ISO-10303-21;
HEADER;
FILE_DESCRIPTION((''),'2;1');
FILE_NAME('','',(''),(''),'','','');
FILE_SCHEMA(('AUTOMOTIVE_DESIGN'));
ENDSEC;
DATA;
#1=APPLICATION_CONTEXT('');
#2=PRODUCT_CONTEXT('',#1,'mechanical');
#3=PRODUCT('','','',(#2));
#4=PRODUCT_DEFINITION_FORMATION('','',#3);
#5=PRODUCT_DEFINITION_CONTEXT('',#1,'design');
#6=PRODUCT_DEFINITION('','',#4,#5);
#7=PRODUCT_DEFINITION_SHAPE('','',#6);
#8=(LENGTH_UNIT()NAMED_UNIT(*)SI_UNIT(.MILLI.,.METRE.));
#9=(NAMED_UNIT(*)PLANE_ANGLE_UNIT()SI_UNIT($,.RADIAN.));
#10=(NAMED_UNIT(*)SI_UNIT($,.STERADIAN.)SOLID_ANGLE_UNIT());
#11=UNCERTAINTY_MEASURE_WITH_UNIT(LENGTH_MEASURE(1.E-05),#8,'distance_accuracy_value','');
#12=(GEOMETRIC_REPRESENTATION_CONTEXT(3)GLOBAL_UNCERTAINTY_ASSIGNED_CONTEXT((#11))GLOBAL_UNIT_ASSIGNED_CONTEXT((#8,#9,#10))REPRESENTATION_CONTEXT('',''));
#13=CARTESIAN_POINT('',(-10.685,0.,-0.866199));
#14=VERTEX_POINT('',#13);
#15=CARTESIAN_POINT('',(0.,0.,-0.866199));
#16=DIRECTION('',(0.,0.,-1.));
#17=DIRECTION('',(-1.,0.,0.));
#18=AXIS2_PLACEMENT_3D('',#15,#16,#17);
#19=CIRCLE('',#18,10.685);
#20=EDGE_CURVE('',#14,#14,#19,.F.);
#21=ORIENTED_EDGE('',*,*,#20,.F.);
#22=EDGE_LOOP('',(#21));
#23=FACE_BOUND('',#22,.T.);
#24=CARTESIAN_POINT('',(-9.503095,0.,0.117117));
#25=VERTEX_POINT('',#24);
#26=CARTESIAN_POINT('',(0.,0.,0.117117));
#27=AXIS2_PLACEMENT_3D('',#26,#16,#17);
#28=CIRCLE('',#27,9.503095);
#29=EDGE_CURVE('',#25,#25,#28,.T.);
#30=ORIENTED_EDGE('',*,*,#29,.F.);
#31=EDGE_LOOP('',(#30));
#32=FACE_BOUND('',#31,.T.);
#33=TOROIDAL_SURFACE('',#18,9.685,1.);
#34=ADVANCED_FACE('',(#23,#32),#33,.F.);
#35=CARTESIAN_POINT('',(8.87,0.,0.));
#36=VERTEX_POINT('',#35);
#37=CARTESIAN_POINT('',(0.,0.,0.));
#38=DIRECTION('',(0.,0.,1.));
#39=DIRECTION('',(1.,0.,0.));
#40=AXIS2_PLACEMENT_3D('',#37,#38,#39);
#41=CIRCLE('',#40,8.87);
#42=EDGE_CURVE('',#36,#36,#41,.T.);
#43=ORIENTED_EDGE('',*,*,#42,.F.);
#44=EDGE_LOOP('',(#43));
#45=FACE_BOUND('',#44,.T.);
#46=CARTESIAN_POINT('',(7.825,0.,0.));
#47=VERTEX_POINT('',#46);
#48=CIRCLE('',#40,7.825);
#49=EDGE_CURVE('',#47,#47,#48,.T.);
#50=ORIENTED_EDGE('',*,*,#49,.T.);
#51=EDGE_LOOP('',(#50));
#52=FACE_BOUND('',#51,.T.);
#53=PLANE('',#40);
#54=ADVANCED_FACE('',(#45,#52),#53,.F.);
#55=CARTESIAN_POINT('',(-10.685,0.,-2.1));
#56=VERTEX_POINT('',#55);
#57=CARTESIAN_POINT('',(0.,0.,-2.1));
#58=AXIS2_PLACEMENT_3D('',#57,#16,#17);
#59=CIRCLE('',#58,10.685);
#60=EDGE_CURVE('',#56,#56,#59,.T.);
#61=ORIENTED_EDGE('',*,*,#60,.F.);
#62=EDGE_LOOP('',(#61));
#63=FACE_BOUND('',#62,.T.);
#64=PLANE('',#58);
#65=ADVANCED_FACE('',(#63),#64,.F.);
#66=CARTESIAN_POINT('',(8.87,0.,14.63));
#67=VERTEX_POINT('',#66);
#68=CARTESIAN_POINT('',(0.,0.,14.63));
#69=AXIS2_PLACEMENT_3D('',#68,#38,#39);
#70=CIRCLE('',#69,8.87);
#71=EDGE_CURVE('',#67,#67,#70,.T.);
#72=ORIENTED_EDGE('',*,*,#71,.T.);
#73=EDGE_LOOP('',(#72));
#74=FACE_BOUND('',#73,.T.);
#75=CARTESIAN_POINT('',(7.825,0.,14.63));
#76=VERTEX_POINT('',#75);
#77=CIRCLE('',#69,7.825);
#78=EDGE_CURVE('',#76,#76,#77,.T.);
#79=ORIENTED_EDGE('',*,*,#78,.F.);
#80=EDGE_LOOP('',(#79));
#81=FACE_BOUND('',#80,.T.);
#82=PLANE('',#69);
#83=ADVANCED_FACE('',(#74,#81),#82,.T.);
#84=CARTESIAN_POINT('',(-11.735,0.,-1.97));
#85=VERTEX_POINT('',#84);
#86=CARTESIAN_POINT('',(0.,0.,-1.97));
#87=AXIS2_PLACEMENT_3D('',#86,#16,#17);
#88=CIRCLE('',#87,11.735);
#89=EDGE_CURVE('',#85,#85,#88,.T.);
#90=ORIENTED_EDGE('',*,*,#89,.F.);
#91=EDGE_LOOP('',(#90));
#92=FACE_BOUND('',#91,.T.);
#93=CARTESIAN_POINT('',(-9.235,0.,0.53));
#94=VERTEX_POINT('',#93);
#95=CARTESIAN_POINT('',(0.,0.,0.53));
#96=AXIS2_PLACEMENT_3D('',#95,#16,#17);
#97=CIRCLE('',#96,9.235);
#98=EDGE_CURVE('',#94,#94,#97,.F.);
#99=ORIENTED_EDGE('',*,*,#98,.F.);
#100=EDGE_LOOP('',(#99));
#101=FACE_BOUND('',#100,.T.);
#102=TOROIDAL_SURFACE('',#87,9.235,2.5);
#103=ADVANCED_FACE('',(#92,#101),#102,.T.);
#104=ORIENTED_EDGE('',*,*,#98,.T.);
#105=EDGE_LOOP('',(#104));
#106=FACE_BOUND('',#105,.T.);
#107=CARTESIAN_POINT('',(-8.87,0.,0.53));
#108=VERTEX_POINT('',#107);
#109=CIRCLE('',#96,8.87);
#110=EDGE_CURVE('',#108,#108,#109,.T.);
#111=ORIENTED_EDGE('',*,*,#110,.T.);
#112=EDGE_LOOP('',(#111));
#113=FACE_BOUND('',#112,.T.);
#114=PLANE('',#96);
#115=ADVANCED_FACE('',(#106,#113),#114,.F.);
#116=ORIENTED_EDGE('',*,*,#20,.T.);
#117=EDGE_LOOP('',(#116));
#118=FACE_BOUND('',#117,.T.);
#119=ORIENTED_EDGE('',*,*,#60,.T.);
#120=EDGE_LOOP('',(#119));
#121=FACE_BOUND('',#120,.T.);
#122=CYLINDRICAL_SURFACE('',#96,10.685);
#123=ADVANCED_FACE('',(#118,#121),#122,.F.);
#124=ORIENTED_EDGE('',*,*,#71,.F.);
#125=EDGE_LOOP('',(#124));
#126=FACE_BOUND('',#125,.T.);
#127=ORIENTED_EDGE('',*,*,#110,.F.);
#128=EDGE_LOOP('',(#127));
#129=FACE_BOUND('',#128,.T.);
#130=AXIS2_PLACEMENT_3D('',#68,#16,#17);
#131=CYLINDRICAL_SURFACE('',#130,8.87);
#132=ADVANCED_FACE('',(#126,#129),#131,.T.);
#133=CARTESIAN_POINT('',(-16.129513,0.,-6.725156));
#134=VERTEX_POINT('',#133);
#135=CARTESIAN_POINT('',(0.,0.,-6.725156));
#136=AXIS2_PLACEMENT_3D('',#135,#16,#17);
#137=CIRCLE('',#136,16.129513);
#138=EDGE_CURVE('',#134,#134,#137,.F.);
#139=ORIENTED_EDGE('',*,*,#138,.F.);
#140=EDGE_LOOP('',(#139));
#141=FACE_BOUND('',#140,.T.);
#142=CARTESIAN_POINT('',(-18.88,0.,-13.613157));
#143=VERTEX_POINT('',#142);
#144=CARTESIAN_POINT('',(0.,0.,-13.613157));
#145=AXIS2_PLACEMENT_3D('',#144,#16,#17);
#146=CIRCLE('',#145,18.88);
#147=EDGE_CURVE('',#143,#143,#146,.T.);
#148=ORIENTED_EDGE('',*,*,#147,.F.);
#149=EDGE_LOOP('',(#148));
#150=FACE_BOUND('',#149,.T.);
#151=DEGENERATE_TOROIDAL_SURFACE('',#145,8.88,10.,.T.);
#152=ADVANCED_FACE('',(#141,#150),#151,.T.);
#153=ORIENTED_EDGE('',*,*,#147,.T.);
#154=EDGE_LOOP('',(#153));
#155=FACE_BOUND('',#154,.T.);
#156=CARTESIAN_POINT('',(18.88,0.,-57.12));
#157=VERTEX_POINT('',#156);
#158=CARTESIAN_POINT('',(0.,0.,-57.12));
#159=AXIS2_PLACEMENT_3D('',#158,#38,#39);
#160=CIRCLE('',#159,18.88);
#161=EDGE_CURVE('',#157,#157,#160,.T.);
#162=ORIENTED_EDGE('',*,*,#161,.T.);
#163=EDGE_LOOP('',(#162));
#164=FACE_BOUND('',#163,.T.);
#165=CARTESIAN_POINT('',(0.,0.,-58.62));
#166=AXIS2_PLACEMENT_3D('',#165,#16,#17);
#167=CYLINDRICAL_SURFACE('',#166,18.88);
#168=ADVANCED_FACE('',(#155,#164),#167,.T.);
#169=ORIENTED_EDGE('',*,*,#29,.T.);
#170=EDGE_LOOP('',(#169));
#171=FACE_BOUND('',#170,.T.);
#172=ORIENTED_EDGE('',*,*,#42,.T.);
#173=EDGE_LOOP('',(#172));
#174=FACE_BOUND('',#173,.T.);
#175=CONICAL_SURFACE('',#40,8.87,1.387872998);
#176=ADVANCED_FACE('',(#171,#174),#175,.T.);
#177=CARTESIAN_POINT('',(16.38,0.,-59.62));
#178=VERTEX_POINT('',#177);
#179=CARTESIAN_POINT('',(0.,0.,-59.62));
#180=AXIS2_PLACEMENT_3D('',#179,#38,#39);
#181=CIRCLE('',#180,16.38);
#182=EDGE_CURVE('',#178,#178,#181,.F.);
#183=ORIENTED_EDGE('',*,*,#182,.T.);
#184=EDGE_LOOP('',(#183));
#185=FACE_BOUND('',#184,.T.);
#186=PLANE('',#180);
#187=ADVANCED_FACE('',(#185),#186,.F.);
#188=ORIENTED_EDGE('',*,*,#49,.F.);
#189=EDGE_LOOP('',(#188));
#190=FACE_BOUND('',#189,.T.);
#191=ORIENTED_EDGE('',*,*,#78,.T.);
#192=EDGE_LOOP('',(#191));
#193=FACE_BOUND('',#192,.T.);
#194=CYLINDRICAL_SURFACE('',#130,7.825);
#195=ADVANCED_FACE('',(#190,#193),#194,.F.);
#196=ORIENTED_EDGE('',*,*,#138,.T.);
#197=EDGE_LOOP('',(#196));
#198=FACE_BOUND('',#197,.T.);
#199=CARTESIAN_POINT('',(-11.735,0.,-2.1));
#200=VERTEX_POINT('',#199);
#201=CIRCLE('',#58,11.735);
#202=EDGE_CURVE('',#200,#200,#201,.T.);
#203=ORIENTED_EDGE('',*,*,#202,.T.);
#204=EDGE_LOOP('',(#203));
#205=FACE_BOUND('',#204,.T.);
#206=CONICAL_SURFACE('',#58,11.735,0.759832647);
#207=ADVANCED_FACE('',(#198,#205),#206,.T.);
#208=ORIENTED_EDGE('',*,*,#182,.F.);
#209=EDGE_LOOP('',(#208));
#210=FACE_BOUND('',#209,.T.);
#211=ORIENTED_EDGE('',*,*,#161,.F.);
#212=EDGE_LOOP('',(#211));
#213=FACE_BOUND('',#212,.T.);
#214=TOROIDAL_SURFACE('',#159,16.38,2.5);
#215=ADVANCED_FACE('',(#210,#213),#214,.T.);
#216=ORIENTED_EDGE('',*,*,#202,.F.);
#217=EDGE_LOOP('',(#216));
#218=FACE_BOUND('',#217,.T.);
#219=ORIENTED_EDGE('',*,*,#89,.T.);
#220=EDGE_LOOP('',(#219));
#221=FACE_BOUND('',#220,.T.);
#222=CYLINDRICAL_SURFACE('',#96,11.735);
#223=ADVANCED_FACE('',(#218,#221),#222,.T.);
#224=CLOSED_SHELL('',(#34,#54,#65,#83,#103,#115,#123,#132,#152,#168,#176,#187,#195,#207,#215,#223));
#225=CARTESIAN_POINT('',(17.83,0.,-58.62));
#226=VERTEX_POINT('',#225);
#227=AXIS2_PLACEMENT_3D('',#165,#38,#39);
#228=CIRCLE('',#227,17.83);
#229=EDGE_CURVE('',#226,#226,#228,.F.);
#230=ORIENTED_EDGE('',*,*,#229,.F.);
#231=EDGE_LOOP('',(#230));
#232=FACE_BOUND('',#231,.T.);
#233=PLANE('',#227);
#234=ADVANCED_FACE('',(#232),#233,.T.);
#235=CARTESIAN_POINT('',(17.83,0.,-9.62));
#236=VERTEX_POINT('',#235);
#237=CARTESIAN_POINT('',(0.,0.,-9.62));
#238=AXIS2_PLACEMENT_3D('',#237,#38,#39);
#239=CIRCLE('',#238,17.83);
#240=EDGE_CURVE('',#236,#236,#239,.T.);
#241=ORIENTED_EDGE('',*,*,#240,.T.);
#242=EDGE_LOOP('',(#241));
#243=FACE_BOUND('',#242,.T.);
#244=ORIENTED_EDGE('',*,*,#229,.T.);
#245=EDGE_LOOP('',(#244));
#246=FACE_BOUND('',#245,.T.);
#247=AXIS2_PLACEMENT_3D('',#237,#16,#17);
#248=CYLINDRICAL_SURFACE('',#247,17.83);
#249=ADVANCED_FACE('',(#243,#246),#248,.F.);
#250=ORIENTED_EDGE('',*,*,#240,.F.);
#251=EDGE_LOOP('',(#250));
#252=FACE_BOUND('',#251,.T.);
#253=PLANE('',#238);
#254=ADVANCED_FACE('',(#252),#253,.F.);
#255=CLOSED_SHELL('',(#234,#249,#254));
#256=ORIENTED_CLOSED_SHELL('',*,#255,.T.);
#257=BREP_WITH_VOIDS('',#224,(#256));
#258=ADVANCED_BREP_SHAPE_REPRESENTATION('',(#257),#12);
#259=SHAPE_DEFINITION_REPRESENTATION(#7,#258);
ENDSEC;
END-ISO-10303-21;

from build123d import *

# Parameters (mm, degrees)
SKETCH2_R           = 8.87
SKETCH2_R_2         = 7.825
BOSS_EXTRUDE1_DEPTH = 14.63
SKETCH3_R           = 11.735
SKETCH3_R_2         = 10.685
BOSS_EXTRUDE2_DEPTH = 2.63
FILLET1_R           = 2.5
FILLET2_R           = 1
SKETCH6_R           = 7.825
CUT_EXTRUDE2_DEPTH  = 18.63
SKETCH7_R           = 18.88
BOSS_EXTRUDE3_DEPTH = 1
SKETCH10_R          = 18.88
SKETCH10_R_2        = 17.83
BOSS_EXTRUDE4_DEPTH = 49
FILLET3_R           = 2.5
FILLET6_R           = 10


# Read off the part's stored shape, not the designer's step: Loft5, Loft6
with BuildPart() as part:
    # Sketch2 → Boss-Extrude1 (new body)
    with BuildSketch(Plane.XY):
        Circle(SKETCH2_R)
        Circle(SKETCH2_R_2, mode=Mode.SUBTRACT)
    extrude(amount=BOSS_EXTRUDE1_DEPTH)


with BuildPart() as body_2:
    # Sketch3 → Boss-Extrude2 (new body)
    with BuildSketch(Plane(origin=(0, 0, -2.1), x_dir=(-1, 0, 0), z_dir=(0, 0, -1))):
        Circle(SKETCH3_R)
        Circle(SKETCH3_R_2, mode=Mode.SUBTRACT)
    extrude(amount=-BOSS_EXTRUDE2_DEPTH)


    add(part.part)  # loft1 joins it to this body
    # loft up to a face of the part (loft1)
    loft([Face(Wire([body_2.edges().sort_by_distance((8.033160288, -8.554446843, 0.53))[0]])), Face(Wire([body_2.edges().sort_by_distance((-6.07193283, -6.465951725, 0))[0]]))])

    # Fillet1
    fillet1_edges = [body_2.edges().sort_by_distance(p)[0] for p in [
        (11.735, 0, 0.53),
    ]]
    fillet(fillet1_edges, radius=FILLET1_R)

    # Fillet2
    fillet2_edges = [body_2.edges().sort_by_distance(p)[0] for p in [
        (10.685, 0, 0.335759162),
    ]]
    fillet(fillet2_edges, radius=FILLET2_R)

    # Sketch6 → Cut-Extrude2 (cut)
    with BuildSketch(Plane.XY.offset(14.63)):
        Circle(SKETCH6_R)
    extrude(amount=-CUT_EXTRUDE2_DEPTH, mode=Mode.SUBTRACT)



with BuildPart() as body_2_2:
    # Sketch7 → Boss-Extrude3 (new body)
    with BuildSketch(Plane.XY.offset(-59.62)):
        Circle(SKETCH7_R)
    extrude(amount=BOSS_EXTRUDE3_DEPTH)

    # Sketch10 → Boss-Extrude4 (add)
    with BuildSketch(Plane.XY.offset(-58.62)):
        Circle(SKETCH10_R)
        Circle(SKETCH10_R_2, mode=Mode.SUBTRACT)
    extrude(amount=BOSS_EXTRUDE4_DEPTH)

    # Fillet3
    fillet3_edges = [body_2_2.edges().sort_by_distance(p)[0] for p in [
        (-18.88, 0, -59.62),
    ]]
    fillet(fillet3_edges, radius=FILLET3_R)


with BuildPart() as body_3:
    # Loft5 outline → Loft5 (revolve)
    with BuildSketch(Plane.XZ):
        Polygon((10.685, -2.1), (0, -2.1), (0, -9.62), (17.83, -9.62), align=None)
    revolve(axis=Axis((0, 0, 0), (0, 0, 1)))


with BuildPart() as body_2_1:
    add(body_2.part)

    add(body_2_2.part)  # Loft6 merges body 2 2

    add(body_3.part)  # Loft6 merges body 3
    # Loft6 outline → Loft6 (revolve)
    with BuildSketch(Plane.XZ):
        Polygon((18.88, -9.62), (11.735, -2.1), (10.685, -2.1), (17.83, -9.62), align=None)
    revolve(axis=Axis((0, 0, 0), (0, 0, 1)))

    # Fillet6
    fillet6_edges = [body_2_1.edges().sort_by_distance(p)[0] for p in [
        (-18.88, 0, -9.62),
    ]]
    fillet(fillet6_edges, radius=FILLET6_R)


solid = body_2_1.part
